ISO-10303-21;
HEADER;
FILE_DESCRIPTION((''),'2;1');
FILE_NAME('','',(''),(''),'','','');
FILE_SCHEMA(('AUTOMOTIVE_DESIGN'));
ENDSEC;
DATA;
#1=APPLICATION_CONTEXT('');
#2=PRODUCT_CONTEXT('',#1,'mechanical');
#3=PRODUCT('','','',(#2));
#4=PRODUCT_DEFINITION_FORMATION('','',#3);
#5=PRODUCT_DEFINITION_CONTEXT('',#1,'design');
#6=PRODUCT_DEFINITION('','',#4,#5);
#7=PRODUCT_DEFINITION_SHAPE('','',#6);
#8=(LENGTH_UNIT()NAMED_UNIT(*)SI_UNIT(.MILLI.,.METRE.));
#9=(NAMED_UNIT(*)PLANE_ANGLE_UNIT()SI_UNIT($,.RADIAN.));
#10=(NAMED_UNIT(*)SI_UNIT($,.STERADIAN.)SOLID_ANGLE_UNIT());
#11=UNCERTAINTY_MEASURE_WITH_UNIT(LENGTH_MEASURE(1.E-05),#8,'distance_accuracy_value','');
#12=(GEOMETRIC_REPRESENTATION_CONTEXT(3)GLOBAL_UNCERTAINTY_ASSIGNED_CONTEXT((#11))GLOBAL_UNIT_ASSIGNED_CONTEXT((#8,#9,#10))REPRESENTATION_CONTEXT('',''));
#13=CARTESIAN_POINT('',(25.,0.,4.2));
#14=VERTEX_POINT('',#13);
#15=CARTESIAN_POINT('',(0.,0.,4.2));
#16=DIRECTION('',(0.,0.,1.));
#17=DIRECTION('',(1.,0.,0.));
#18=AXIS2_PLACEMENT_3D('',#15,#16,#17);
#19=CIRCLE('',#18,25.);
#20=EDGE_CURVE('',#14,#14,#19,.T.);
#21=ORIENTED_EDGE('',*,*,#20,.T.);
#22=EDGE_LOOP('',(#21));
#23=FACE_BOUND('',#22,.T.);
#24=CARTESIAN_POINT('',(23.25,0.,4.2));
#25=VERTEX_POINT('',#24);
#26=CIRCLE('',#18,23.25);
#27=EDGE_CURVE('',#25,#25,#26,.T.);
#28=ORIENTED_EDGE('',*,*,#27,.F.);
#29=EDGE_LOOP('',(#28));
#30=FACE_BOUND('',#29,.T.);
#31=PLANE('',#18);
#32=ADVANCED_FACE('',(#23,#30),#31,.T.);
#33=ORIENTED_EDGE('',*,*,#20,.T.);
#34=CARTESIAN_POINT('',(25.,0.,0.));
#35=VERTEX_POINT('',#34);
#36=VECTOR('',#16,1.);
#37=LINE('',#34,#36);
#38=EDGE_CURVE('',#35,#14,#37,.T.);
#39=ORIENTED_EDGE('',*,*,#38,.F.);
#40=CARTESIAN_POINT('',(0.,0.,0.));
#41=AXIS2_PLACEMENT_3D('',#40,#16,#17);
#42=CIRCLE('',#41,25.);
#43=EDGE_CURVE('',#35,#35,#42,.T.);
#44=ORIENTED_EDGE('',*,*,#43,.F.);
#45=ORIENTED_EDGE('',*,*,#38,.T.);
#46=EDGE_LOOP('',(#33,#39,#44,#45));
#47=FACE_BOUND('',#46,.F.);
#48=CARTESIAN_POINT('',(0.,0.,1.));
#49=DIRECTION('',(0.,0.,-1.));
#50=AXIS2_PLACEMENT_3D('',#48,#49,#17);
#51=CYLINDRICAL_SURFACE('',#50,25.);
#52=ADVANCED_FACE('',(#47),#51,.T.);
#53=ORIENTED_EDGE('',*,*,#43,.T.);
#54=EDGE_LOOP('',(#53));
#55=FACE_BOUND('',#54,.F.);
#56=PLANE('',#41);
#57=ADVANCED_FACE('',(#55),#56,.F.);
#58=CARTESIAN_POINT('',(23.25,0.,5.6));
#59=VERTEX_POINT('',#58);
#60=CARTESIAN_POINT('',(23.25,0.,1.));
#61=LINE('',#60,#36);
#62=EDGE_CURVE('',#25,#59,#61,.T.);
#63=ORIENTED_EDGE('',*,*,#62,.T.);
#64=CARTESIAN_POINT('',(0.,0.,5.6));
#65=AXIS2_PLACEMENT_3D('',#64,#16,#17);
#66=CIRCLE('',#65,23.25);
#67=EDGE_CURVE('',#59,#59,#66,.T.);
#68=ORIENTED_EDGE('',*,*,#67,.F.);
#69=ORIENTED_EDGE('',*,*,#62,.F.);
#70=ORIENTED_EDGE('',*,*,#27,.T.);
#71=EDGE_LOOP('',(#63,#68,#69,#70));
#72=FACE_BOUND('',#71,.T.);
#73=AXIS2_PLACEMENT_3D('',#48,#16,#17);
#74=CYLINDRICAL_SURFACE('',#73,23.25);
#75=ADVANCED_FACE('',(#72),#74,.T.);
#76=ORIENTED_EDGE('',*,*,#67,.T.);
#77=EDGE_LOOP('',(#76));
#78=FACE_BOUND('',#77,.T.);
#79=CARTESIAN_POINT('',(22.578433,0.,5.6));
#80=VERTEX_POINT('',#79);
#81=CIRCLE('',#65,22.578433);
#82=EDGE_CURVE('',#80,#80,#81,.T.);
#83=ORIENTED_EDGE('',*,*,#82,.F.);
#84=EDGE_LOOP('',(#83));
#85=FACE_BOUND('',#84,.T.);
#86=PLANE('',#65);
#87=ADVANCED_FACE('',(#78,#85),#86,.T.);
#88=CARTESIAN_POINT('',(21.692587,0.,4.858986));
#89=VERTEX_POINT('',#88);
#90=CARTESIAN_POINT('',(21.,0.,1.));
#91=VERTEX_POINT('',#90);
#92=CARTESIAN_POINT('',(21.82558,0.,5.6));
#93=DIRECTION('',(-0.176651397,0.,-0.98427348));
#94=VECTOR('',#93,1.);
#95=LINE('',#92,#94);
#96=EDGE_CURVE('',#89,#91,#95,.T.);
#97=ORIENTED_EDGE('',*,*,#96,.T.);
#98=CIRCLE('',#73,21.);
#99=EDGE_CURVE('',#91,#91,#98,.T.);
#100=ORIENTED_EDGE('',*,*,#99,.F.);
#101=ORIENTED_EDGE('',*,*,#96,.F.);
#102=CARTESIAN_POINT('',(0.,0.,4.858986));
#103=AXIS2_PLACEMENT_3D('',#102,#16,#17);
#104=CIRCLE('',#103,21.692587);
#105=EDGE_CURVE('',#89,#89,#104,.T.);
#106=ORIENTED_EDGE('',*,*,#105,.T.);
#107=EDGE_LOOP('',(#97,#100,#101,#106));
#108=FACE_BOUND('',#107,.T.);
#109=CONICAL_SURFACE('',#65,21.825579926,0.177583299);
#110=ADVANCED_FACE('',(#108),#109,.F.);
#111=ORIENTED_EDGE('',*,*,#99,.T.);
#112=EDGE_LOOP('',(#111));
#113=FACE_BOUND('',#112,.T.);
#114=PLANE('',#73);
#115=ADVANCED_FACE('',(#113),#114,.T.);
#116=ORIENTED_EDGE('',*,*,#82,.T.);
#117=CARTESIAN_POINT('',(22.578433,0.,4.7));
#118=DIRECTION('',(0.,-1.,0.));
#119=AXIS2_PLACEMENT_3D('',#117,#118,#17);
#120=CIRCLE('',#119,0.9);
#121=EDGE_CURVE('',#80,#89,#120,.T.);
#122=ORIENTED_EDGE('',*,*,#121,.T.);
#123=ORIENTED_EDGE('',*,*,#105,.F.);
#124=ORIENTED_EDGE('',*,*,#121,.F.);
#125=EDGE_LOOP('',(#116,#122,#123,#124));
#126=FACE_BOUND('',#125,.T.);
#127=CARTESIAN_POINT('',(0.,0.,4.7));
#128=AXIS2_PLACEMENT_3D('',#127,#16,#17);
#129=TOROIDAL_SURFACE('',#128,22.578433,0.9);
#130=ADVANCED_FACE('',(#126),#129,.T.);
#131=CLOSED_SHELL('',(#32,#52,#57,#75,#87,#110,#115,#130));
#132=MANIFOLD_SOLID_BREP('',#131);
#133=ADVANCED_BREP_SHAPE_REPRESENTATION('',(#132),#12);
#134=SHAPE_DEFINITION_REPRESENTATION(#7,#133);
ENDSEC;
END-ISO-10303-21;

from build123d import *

# Parameters (mm, degrees)
F0_R     = 25
F1_DEPTH = 1
F5_R     = 25
F5_R_2   = 23.25
F6_DEPTH = 3.2
F7_R     = 0.9


with BuildPart() as f1:
    # F0 (on Top) → F1 (new body)
    with BuildSketch(Plane.XY):
        Circle(F0_R)
    extrude(amount=F1_DEPTH)

    # F3 (on Front) → F4 (revolve)
    with BuildSketch(Plane.XZ):
        Polygon((21, 1), (23.25, 1), (23.25, 5.6), (21.8255799264, 5.6), align=None)
    revolve(axis=Axis((0, 0, 1), (0, 0, 1)))

    # F5 (on face) → F6 (join)
    with BuildSketch(Plane.XY.offset(1)):
        Circle(F5_R)
        Circle(F5_R_2, mode=Mode.SUBTRACT)
    extrude(amount=F6_DEPTH)

    # F7
    f7_edges = [f1.edges().sort_by_distance(p)[0] for p in [
        (-21.82558, 0, 5.6),
    ]]
    fillet(f7_edges, radius=F7_R)


solid = f1.part
